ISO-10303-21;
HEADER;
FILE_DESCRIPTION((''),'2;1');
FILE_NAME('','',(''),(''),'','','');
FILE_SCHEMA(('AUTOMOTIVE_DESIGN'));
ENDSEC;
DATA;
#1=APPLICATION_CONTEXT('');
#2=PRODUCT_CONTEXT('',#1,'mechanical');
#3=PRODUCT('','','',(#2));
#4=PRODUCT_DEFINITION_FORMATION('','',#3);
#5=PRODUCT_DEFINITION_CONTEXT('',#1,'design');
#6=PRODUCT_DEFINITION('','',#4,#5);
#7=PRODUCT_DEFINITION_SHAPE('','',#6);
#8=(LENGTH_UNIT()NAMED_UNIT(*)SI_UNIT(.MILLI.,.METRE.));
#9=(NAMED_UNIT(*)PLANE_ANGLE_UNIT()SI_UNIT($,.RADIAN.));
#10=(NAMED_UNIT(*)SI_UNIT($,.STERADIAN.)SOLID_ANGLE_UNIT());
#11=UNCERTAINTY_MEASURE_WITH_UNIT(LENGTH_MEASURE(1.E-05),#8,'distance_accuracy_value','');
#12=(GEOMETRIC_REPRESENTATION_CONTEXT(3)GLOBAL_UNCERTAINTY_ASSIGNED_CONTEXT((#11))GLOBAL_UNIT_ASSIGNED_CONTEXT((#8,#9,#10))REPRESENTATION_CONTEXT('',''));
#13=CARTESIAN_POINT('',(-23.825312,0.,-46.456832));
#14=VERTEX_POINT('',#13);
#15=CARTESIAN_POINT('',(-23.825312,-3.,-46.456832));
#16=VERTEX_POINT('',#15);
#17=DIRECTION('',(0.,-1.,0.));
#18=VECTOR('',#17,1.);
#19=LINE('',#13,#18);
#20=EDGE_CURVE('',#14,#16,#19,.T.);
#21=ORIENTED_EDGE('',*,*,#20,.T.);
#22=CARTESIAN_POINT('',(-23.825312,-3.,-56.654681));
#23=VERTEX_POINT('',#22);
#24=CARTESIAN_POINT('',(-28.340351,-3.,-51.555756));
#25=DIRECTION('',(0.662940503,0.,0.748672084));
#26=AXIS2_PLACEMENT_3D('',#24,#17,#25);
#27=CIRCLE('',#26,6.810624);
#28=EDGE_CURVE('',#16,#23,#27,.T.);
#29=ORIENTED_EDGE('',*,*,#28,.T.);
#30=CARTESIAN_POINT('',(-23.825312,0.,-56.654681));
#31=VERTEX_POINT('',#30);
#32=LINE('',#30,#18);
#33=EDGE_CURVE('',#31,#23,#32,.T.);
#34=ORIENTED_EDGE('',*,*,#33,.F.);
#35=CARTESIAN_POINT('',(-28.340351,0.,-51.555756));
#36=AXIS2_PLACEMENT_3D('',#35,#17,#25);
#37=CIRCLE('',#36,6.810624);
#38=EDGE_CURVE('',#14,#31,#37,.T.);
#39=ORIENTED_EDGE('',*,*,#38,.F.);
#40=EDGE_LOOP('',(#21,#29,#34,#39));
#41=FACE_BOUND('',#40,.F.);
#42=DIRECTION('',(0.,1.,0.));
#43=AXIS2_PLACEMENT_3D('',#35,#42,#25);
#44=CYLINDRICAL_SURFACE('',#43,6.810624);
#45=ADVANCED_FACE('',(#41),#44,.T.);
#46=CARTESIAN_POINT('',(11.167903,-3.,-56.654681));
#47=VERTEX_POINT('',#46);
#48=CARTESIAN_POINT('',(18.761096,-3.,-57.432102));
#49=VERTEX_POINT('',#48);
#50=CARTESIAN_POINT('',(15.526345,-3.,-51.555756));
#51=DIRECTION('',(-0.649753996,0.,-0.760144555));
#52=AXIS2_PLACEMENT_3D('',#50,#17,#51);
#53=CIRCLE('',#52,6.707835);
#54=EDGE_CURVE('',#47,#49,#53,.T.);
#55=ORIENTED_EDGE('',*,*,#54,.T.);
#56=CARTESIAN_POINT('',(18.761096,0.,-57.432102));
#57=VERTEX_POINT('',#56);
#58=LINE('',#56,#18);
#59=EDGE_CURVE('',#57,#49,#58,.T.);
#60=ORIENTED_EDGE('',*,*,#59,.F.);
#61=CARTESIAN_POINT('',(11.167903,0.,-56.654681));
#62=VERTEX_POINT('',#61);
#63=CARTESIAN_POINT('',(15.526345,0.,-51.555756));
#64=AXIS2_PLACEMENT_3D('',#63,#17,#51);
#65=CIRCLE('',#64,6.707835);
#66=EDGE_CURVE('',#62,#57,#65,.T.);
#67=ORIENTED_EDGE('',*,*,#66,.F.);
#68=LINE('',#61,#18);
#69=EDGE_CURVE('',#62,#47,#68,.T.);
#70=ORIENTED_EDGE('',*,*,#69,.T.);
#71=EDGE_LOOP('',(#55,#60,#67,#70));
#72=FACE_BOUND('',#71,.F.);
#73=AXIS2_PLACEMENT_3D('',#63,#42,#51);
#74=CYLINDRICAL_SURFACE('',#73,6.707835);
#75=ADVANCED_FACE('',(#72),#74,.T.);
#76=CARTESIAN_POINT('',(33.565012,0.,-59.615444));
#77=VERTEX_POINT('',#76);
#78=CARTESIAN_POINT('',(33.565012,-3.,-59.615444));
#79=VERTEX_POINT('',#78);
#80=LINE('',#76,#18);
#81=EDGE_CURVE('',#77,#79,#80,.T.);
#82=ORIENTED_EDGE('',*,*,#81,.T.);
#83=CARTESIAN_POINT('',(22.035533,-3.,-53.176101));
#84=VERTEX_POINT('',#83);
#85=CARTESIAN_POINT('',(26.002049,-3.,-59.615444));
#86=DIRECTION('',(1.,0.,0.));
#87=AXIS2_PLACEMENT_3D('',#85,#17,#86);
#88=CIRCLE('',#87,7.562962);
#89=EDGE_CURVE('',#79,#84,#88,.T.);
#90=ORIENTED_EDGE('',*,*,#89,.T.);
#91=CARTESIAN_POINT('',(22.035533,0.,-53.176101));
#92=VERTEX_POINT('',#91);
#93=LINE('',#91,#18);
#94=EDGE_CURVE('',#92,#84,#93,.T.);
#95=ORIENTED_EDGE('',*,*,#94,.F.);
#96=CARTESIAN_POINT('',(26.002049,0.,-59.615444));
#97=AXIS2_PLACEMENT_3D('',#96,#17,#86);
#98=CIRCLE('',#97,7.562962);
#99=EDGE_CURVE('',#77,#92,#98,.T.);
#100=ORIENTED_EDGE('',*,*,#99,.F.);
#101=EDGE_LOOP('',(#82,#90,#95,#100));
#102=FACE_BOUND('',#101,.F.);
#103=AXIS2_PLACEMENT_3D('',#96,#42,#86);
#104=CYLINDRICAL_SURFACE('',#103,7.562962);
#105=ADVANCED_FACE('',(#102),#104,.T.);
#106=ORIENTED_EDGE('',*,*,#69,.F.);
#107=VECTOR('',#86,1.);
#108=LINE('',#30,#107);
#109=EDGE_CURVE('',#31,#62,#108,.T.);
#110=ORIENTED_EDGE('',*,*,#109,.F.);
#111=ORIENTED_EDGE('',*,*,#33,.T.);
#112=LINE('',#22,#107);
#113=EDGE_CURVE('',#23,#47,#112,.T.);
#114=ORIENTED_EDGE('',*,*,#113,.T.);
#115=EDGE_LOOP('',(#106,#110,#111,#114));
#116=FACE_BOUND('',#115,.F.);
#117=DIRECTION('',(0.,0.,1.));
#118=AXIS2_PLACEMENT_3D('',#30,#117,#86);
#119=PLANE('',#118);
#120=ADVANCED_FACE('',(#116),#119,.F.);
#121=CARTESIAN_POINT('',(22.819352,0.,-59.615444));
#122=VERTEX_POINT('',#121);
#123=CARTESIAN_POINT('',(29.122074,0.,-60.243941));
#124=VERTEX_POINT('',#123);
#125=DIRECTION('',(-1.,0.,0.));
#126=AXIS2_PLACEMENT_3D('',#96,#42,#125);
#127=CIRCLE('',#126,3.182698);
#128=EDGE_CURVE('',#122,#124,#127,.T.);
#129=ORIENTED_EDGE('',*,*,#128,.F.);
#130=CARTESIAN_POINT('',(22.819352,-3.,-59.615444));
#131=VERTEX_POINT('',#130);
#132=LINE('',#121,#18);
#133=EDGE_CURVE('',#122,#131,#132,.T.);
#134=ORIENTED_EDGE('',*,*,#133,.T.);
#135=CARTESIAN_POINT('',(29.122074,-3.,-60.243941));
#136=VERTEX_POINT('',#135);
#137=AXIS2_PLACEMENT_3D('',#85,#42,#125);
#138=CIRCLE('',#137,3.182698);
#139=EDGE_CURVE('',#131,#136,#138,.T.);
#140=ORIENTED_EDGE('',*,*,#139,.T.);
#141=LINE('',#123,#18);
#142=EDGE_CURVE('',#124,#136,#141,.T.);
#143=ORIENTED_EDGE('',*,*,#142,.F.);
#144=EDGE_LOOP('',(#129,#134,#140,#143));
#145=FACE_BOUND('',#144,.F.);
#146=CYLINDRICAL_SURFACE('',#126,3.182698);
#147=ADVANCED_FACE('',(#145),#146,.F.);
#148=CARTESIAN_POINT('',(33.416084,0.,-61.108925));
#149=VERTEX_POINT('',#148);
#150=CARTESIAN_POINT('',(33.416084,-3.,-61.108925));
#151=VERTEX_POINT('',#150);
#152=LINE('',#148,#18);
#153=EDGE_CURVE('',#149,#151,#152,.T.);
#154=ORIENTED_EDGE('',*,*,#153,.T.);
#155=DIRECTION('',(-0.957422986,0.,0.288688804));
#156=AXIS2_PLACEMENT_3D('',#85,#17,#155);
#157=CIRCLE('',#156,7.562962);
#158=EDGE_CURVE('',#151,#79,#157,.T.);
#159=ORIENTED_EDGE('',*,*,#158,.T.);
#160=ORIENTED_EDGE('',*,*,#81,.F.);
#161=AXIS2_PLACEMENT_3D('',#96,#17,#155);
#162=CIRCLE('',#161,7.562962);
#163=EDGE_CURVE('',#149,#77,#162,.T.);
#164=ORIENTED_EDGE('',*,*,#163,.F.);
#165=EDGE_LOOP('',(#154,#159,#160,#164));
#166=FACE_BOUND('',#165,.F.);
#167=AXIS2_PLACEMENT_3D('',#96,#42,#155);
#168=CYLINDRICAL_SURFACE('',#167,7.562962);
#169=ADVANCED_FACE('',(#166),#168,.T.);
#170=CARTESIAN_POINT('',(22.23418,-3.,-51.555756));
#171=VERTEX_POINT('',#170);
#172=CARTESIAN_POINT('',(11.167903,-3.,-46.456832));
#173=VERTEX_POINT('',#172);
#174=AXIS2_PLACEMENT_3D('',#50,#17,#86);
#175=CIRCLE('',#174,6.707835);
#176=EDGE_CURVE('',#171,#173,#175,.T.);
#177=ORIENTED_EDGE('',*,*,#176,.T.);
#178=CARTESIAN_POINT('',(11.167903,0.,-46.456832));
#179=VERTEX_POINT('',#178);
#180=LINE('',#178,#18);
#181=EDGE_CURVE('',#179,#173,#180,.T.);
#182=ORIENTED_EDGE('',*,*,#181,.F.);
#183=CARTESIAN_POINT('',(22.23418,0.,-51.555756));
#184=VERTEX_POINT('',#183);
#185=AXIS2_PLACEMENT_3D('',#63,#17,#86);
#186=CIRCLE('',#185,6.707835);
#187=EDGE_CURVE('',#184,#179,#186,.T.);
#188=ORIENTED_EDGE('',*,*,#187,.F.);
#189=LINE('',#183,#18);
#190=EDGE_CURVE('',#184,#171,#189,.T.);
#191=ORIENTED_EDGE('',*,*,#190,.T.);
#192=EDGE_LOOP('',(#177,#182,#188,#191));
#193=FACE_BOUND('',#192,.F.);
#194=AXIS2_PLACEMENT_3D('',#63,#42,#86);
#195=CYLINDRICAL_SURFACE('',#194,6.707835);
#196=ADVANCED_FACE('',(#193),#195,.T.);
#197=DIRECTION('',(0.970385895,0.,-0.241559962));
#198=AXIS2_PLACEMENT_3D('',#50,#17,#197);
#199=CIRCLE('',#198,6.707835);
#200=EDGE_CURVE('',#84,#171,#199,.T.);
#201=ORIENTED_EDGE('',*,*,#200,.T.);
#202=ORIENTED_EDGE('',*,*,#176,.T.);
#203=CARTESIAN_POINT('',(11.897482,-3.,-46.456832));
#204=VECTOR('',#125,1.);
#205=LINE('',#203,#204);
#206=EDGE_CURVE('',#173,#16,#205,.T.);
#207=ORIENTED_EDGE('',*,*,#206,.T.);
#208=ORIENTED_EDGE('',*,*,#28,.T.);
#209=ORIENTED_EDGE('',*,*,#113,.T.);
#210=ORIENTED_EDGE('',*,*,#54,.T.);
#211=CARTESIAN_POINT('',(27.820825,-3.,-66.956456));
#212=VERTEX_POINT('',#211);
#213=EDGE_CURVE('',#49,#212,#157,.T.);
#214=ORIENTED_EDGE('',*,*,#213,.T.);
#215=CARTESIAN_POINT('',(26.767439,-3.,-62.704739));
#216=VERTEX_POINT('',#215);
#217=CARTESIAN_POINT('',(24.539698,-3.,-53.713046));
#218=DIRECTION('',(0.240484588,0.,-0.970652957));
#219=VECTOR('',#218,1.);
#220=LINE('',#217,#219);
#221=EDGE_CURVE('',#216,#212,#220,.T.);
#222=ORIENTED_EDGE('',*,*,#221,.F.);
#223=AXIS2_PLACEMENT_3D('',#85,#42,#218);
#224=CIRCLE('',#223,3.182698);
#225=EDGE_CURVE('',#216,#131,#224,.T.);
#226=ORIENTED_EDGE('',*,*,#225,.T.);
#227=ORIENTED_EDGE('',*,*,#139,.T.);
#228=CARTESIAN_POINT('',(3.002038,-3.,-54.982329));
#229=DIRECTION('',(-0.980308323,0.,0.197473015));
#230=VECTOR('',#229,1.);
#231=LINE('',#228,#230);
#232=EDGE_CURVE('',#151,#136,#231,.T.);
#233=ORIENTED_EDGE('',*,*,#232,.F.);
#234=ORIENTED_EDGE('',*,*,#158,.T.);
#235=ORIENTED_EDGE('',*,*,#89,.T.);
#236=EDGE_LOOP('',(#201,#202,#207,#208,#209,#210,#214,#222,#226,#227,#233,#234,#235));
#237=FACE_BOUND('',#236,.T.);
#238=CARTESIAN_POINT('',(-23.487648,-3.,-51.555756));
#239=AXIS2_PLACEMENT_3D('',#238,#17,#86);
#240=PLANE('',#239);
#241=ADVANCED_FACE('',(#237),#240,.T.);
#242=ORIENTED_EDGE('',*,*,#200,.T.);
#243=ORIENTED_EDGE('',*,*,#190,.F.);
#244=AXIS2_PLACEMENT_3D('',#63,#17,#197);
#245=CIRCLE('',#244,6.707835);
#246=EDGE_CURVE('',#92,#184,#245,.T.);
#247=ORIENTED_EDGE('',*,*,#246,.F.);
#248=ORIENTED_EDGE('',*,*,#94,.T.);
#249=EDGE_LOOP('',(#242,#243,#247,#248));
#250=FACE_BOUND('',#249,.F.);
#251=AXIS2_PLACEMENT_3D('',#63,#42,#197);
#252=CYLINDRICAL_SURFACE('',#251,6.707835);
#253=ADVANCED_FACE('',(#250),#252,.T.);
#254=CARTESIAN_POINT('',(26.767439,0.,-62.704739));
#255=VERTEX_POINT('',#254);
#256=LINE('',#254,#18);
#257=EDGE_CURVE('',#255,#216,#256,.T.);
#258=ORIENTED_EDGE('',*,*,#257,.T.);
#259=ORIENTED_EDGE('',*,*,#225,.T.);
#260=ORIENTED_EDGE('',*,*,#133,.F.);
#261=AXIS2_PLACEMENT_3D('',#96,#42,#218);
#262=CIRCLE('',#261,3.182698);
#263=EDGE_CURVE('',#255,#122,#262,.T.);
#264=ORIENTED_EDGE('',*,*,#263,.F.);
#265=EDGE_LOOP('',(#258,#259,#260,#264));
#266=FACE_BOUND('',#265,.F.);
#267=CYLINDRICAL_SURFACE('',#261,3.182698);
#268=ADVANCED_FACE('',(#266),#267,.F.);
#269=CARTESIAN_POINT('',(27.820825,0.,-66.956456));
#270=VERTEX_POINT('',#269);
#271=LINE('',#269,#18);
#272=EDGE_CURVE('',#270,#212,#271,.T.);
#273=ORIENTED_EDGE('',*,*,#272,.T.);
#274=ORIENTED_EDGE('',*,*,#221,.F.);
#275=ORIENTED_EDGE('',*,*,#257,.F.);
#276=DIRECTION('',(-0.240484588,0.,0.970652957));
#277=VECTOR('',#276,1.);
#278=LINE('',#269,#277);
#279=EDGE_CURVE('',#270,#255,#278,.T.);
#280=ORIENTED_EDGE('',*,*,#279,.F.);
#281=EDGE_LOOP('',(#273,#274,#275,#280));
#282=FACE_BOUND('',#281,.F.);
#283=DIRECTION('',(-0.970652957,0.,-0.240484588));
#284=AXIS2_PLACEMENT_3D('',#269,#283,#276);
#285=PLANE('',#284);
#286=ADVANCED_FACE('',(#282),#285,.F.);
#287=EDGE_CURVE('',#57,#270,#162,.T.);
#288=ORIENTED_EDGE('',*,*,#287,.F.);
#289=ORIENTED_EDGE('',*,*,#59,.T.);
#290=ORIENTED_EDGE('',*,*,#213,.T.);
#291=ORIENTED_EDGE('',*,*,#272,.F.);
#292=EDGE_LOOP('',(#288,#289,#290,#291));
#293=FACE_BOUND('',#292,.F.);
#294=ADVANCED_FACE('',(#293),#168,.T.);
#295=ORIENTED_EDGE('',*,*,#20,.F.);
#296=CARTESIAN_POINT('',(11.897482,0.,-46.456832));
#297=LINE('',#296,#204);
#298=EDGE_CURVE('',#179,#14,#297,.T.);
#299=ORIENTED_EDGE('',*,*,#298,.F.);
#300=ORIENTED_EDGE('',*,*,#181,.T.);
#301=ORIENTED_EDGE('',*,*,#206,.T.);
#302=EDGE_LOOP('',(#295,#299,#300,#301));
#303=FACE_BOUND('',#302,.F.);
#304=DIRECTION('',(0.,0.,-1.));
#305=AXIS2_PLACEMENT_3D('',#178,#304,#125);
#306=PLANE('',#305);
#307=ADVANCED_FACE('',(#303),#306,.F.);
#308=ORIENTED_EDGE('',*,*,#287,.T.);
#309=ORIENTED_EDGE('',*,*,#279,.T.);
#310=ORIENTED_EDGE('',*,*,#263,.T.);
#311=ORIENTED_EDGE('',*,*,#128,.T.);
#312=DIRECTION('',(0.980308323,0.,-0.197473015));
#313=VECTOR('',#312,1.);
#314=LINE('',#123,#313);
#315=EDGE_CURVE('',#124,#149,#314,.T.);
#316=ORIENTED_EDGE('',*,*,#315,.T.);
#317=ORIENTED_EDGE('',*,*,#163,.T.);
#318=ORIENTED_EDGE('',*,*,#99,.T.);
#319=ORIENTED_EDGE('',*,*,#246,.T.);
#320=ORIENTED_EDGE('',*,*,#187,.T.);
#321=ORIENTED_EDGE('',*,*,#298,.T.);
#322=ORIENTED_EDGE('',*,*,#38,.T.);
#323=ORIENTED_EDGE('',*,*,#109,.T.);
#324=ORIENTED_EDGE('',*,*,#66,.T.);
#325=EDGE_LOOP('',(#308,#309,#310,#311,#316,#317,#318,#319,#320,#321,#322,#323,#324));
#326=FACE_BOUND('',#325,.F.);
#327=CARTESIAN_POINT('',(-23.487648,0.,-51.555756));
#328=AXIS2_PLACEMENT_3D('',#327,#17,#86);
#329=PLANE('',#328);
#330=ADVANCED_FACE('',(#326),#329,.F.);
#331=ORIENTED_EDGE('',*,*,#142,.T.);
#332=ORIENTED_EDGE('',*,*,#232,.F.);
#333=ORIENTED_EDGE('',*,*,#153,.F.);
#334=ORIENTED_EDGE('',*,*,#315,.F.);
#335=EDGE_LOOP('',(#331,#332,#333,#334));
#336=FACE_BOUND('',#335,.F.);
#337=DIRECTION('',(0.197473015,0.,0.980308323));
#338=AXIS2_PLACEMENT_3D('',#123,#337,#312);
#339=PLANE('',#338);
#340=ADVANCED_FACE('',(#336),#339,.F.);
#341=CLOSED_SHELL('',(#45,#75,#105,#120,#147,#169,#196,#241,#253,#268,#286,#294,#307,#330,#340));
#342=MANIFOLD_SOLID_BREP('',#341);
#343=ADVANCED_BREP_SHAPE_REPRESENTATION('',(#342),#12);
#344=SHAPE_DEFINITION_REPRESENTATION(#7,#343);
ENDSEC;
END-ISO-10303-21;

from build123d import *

# Parameters (mm, degrees)
F1_DEPTH = 3
F3_DEPTH = 25


# Not quite as in the source:
# - a feature names something its author has since deleted; it is built from what else it names


with BuildPart() as f1:
    # F0 (on Front) → F1 (new body)
    with BuildSketch(Plane.XZ):
        with BuildLine():
            Line((-24.6447846293, -46.4568324387), (-24.6447846293, -56.6546805203))
            Line((-24.6447846293, -56.6546805203), (-23.8253123528, -56.6546805203))
            ThreePointArc((-23.8253123528, -56.6546805203), (-22.130084006, -54.3516793641), (-21.5297268649, -51.5557564795))
            ThreePointArc((-21.5297268649, -51.5557564795), (-22.130084006, -48.7598335949), (-23.8253123528, -46.4568324387))
            Line((-23.8253123528, -46.4568324387), (-24.6447846293, -46.4568324387))
        make_face()
        with BuildLine():
            Line((-23.8253123528, -56.6546805203), (-24.6447846293, -56.6546805203))
            Line((-24.6447846293, -56.6546805203), (-24.6447846293, -46.4568324387))
            Line((-24.6447846293, -46.4568324387), (-23.8253123528, -46.4568324387))
            ThreePointArc((-23.8253123528, -46.4568324387), (-35.1509748081, -51.5557564795), (-23.8253123528, -56.6546805203))
        make_face()
        with BuildLine():
            ThreePointArc((-21.5297268649, -51.5557564795), (-22.130084006, -54.3516793641), (-23.8253123528, -56.6546805203))
            Line((-23.8253123528, -56.6546805203), (11.1679025889, -56.6546805203))
            ThreePointArc((11.1679025889, -56.6546805203), (8.8185102803, -51.5557564795), (11.1679025889, -46.4568324387))
            Line((11.1679025889, -46.4568324387), (-23.8253123528, -46.4568324387))
            ThreePointArc((-23.8253123528, -46.4568324387), (-22.130084006, -48.7598335949), (-21.5297268649, -51.5557564795))
        make_face()
        with BuildLine():
            ThreePointArc((11.1679025889, -46.4568324387), (8.8185102803, -51.5557564795), (11.1679025889, -56.6546805203))
            Line((11.1679025889, -56.6546805203), (11.8974819779, -56.6546805203))
            Line((11.8974819779, -56.6546805203), (11.8974819779, -46.4568324387))
            Line((11.8974819779, -46.4568324387), (11.1679025889, -46.4568324387))
        make_face()
        with BuildLine():
            Line((11.8974819779, -56.6546805203), (11.1679025889, -56.6546805203))
            ThreePointArc((11.1679025889, -56.6546805203), (14.8431416467, -58.2287078356), (18.7610955863, -57.4321018799))
            ThreePointArc((18.7610955863, -57.4321018799), (20.0078661899, -55.0037023767), (22.0355331957, -53.1761007794))
            ThreePointArc((22.0355331957, -53.1761007794), (22.1843328788, -52.371994204), (22.234179719, -51.5557564795))
            ThreePointArc((22.234179719, -51.5557564795), (18.3334195709, -45.4635172382), (11.1679025889, -46.4568324387))
            Line((11.1679025889, -46.4568324387), (11.8974819779, -46.4568324387))
            Line((11.8974819779, -46.4568324387), (11.8974819779, -56.6546805203))
        make_face()
        with BuildLine():
            ThreePointArc((22.0355331957, -53.1761007794), (20.0078661899, -55.0037023767), (18.7610955863, -57.4321018799))
            ThreePointArc((18.7610955863, -57.4321018799), (20.8427791516, -55.6460589781), (22.0355331957, -53.1761007794))
        make_face()
        with BuildLine():
            ThreePointArc((22.0355331957, -53.1761007794), (20.8427791516, -55.6460589781), (18.7610955863, -57.4321018799))
            ThreePointArc((18.7610955863, -57.4321018799), (24.8985692809, -67.0974714468), (33.5650116518, -59.615444392))
            ThreePointArc((33.5650116518, -59.615444392), (29.6898526428, -53.0125279979), (22.0355331957, -53.1761007794))
        make_face()
    extrude(amount=F1_DEPTH)

    # F2 (on face) → F3 (cut)
    with BuildSketch(Plane(origin=(0, 0, 0), x_dir=(-1, 0, 0), z_dir=(0, 1, 0))):
        with BuildLine():
            ThreePointArc((-26.7674391798, -62.7047392847), (-28.3016132323, -61.8158013566), (-29.1220744495, -60.2439412946))
            Line((-29.1220744495, -60.2439412946), (-33.4160842435, -61.108925342))
            ThreePointArc((-33.4160842435, -61.108925342), (-31.4664434529, -64.8440957921), (-27.8208252933, -66.9564560213))
            Line((-27.8208252933, -66.9564560213), (-26.7674391798, -62.7047392847))
        make_face()
        with BuildLine():
            ThreePointArc((-27.8208252933, -66.9564560213), (-31.4664434529, -64.8440957921), (-33.4160842435, -61.108925342))
            Line((-33.4160842435, -61.108925342), (-39.6901629865, -62.3727738857))
            Line((-39.6901629865, -62.3727738857), (-29.0901046246, -72.0795691013))
            Line((-29.0901046246, -72.0795691013), (-27.8208252933, -66.9564560213))
        make_face()
        with BuildLine():
            Line((-26.0020494461, -59.615444392), (-29.1220744495, -60.2439412946))
            ThreePointArc((-29.1220744495, -60.2439412946), (-28.3016132323, -61.8158013566), (-26.7674391798, -62.7047392847))
            Line((-26.7674391798, -62.7047392847), (-26.0020494461, -59.615444392))
        make_face()
        with BuildLine():
            ThreePointArc((-26.7674391798, -62.7047392847), (-24.0407284287, -62.1219926651), (-22.8193517887, -59.615444392))
            ThreePointArc((-22.8193517887, -59.615444392), (-26.3178564355, -56.4484536556), (-29.1220744495, -60.2439412946))
            Line((-29.1220744495, -60.2439412946), (-26.0020494461, -59.615444392))
            Line((-26.0020494461, -59.615444392), (-26.7674391798, -62.7047392847))
        make_face()
    extrude(amount=-F3_DEPTH, mode=Mode.SUBTRACT)


solid = f1.part
